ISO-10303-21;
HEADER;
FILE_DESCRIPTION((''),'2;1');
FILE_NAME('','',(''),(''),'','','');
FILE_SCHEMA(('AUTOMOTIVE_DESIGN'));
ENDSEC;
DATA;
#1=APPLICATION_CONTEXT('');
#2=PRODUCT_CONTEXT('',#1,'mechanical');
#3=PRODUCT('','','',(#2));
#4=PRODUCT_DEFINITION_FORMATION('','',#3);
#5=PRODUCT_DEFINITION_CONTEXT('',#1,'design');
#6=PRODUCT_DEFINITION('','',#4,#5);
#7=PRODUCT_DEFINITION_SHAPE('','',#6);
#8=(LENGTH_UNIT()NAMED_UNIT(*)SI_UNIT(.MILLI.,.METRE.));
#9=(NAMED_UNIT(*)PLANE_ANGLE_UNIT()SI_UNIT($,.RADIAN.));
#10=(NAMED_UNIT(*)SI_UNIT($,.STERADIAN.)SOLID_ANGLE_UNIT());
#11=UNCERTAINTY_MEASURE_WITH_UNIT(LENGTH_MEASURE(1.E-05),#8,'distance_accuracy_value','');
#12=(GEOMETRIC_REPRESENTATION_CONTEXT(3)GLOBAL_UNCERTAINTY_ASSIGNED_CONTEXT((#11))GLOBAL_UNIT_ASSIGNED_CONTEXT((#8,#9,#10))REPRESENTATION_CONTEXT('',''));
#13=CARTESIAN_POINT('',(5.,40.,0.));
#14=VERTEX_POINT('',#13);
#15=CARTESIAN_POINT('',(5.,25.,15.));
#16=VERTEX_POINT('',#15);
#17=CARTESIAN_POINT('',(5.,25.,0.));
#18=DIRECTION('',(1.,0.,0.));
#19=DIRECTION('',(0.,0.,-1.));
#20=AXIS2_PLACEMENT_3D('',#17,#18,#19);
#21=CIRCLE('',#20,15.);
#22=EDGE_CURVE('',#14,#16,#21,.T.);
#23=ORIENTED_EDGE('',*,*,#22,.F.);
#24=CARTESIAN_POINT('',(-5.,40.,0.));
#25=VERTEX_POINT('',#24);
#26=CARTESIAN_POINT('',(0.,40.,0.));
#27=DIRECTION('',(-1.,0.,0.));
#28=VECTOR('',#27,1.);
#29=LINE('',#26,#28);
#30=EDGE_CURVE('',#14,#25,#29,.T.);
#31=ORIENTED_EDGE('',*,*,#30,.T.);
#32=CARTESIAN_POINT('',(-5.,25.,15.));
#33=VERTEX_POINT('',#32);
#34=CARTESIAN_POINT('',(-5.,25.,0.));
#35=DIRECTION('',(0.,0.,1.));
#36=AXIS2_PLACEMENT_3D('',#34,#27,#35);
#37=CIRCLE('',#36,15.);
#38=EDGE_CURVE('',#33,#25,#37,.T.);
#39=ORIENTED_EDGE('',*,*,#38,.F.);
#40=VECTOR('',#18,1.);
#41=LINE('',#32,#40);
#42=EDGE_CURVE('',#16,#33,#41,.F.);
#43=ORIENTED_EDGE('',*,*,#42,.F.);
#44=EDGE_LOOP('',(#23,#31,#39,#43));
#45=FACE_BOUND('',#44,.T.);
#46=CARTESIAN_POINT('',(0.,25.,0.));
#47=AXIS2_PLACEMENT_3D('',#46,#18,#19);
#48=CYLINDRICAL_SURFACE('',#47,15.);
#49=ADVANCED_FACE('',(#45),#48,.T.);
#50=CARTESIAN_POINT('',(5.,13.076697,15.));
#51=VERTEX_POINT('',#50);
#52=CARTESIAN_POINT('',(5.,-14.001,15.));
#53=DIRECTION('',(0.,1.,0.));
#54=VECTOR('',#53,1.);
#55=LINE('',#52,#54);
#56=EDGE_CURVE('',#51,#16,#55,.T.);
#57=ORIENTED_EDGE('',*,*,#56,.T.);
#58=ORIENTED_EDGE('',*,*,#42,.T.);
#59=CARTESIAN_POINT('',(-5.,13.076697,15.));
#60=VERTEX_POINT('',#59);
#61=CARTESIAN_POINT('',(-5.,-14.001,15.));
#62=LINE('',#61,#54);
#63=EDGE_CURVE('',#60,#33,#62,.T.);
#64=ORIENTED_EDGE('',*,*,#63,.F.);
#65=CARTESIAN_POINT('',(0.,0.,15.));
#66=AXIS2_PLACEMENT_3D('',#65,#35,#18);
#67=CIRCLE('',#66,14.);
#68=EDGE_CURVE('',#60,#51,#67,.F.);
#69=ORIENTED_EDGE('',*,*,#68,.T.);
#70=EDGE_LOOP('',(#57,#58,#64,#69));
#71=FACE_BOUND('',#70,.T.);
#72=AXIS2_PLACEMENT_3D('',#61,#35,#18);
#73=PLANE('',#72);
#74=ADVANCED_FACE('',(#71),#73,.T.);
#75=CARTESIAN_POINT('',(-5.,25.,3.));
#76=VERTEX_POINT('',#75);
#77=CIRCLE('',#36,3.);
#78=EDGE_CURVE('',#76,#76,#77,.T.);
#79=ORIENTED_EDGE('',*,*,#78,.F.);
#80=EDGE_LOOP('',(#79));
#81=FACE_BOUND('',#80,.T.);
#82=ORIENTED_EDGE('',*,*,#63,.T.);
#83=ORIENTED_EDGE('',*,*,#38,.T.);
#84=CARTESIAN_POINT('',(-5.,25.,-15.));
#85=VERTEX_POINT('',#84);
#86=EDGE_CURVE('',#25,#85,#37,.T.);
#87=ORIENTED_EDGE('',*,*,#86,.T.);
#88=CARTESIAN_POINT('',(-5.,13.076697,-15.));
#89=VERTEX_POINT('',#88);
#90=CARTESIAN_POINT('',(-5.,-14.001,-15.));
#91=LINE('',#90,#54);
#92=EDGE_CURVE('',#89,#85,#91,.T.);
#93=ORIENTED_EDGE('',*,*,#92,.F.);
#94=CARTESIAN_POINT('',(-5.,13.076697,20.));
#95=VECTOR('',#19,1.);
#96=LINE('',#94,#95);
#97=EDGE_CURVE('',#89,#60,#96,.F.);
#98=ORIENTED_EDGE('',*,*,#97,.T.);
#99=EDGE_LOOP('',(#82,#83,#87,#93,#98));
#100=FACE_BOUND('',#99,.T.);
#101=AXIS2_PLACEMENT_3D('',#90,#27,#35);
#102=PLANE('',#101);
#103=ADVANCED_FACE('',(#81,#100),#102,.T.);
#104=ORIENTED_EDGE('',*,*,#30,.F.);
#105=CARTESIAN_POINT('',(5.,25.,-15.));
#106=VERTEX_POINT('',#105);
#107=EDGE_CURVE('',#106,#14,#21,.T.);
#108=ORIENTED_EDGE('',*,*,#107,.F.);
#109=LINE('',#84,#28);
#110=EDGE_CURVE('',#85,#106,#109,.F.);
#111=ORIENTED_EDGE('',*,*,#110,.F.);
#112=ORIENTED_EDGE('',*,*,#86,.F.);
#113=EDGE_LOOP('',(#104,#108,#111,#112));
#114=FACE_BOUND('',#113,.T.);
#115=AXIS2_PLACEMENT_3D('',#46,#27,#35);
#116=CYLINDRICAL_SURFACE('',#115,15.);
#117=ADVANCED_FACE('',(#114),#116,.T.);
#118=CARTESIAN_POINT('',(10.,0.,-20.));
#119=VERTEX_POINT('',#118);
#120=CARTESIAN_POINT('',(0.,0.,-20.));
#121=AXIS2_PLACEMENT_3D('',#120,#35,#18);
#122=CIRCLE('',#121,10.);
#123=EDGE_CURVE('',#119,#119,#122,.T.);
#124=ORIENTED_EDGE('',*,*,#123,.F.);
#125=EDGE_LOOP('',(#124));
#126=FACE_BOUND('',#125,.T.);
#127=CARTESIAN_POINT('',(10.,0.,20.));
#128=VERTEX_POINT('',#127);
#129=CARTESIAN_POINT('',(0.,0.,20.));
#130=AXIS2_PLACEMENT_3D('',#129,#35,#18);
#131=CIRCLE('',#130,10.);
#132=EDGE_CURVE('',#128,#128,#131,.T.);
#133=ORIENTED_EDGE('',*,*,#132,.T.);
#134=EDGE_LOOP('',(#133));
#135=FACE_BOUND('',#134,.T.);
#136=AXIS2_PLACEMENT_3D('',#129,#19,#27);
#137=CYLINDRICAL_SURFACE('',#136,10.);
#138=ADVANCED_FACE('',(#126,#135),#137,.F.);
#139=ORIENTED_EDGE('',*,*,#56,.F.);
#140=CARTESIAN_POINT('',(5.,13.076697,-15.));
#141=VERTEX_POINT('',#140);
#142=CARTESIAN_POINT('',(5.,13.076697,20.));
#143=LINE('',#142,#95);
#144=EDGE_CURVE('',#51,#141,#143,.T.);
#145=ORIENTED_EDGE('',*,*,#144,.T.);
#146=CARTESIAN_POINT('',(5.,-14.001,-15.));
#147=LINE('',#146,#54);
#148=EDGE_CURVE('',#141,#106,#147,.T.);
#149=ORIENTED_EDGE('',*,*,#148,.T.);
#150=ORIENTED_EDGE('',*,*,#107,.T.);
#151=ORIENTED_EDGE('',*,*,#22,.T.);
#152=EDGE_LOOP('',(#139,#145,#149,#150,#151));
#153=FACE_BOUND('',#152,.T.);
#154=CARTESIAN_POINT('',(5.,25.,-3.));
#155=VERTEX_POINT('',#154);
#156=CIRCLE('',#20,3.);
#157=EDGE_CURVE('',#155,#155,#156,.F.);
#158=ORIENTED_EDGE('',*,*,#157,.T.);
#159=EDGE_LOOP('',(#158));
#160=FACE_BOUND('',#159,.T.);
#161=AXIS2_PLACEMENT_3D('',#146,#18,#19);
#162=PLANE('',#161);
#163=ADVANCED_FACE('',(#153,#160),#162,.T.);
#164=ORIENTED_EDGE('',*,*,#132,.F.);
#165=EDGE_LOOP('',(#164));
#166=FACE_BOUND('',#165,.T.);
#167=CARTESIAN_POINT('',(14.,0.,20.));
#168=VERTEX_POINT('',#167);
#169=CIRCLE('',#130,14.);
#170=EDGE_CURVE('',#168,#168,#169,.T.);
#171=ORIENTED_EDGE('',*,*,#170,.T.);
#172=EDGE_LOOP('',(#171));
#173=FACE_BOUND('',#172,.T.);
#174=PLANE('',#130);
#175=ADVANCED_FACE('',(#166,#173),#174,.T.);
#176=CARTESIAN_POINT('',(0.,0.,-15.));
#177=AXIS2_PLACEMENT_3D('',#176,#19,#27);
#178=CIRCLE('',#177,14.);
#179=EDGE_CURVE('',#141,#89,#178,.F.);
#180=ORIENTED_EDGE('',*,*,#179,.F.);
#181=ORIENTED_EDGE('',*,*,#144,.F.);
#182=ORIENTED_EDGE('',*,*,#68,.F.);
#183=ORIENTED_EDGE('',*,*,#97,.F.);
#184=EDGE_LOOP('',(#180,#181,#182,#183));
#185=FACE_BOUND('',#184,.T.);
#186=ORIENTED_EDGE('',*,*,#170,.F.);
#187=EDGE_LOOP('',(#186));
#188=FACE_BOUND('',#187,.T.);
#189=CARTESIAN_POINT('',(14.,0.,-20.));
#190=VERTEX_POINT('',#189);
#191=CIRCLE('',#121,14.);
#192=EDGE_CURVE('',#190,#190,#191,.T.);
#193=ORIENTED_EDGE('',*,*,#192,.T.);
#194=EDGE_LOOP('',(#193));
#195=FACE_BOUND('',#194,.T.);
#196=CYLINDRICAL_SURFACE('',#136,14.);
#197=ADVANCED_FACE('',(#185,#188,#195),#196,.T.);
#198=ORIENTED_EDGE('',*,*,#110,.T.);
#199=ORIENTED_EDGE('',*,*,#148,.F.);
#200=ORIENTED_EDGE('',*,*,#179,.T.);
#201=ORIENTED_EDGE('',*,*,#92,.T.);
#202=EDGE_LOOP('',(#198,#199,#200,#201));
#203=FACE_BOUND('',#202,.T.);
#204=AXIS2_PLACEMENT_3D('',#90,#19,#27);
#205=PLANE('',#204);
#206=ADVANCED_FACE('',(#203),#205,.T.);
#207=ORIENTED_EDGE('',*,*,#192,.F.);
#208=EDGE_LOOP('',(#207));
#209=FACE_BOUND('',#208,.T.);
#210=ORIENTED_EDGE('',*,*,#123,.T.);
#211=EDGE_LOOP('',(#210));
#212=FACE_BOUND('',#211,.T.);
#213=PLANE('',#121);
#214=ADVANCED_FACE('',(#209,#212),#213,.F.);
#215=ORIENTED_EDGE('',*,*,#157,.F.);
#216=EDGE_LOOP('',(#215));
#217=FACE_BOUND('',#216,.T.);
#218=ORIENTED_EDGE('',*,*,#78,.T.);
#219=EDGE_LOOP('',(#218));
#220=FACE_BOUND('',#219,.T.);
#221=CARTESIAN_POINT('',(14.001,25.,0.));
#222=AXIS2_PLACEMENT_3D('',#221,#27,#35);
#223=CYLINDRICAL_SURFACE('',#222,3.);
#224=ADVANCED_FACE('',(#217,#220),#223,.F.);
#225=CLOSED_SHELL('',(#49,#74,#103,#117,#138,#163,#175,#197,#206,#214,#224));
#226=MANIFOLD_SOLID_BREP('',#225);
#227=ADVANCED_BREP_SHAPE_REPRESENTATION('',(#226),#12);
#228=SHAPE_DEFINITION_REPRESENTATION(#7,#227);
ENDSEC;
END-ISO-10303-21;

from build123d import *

# Parameters (mm, degrees)
SKETCH1_R                = 14
SKETCH1_R_2              = 10
BOSS_EXTRUDE1_DEPTH      = 20
BOSS_EXTRUDE2_REACH      = 61.262
BOSS_EXTRUDE2_END_RADIUS = 14
SKETCH4_W                = 10
SKETCH4_H                = 30
FILLET1_R                = 15
CUT_EXTRUDE1_REACH       = 50.59
SKETCH5_R                = 3


with BuildPart() as part:
    # Sketch1 → Boss-Extrude1 (new, symmetric)
    with BuildSketch(Plane.XY):
        Circle(SKETCH1_R)
        Circle(SKETCH1_R_2, mode=Mode.SUBTRACT)
    extrude(amount=BOSS_EXTRUDE1_DEPTH, both=True)

    # Boss-Extrude2: up to this cylinder (the profile starts outside it)
    boss_extrude2_end = Plane(origin=(0, 0, 0), z_dir=(0, 0, -1)) * Cylinder(BOSS_EXTRUDE2_END_RADIUS, 151.524, mode=Mode.PRIVATE)
    # Sketch4 → Boss-Extrude2 (add, up to the surface)
    with BuildSketch(Plane(origin=(0, 40, 0), x_dir=(1, 0, 0), z_dir=(0, 1, 0)), mode=Mode.PRIVATE) as boss_extrude2_sk1:
        Rectangle(SKETCH4_W, SKETCH4_H)
    boss_extrude2_tool1 = extrude(boss_extrude2_sk1.sketch, amount=-BOSS_EXTRUDE2_REACH, mode=Mode.PRIVATE) - boss_extrude2_end
    add(boss_extrude2_tool1.solids().sort_by_distance((0, 40, 0))[0])

    # Fillet1
    fillet1_edges = [part.edges().sort_by_distance(p)[0] for p in [
        (0, 40, 15),
        (0, 40, -15),
    ]]
    fillet(fillet1_edges, radius=FILLET1_R - 0.0001)  # a hair under: the kernel refuses the full size

    # Sketch5 → Cut-Extrude1 (cut, up to next)
    with BuildSketch(Plane.ZY.offset(5), mode=Mode.PRIVATE) as cut_extrude1_sk1:
        with Locations((0, 25)):
            Circle(SKETCH5_R)
    cut_extrude1_tool1 = extrude(cut_extrude1_sk1.sketch, amount=-CUT_EXTRUDE1_REACH, mode=Mode.PRIVATE) & part.part
    add(cut_extrude1_tool1.solids().sort_by_distance((-5, 25, 0))[0], mode=Mode.SUBTRACT)


solid = part.part
